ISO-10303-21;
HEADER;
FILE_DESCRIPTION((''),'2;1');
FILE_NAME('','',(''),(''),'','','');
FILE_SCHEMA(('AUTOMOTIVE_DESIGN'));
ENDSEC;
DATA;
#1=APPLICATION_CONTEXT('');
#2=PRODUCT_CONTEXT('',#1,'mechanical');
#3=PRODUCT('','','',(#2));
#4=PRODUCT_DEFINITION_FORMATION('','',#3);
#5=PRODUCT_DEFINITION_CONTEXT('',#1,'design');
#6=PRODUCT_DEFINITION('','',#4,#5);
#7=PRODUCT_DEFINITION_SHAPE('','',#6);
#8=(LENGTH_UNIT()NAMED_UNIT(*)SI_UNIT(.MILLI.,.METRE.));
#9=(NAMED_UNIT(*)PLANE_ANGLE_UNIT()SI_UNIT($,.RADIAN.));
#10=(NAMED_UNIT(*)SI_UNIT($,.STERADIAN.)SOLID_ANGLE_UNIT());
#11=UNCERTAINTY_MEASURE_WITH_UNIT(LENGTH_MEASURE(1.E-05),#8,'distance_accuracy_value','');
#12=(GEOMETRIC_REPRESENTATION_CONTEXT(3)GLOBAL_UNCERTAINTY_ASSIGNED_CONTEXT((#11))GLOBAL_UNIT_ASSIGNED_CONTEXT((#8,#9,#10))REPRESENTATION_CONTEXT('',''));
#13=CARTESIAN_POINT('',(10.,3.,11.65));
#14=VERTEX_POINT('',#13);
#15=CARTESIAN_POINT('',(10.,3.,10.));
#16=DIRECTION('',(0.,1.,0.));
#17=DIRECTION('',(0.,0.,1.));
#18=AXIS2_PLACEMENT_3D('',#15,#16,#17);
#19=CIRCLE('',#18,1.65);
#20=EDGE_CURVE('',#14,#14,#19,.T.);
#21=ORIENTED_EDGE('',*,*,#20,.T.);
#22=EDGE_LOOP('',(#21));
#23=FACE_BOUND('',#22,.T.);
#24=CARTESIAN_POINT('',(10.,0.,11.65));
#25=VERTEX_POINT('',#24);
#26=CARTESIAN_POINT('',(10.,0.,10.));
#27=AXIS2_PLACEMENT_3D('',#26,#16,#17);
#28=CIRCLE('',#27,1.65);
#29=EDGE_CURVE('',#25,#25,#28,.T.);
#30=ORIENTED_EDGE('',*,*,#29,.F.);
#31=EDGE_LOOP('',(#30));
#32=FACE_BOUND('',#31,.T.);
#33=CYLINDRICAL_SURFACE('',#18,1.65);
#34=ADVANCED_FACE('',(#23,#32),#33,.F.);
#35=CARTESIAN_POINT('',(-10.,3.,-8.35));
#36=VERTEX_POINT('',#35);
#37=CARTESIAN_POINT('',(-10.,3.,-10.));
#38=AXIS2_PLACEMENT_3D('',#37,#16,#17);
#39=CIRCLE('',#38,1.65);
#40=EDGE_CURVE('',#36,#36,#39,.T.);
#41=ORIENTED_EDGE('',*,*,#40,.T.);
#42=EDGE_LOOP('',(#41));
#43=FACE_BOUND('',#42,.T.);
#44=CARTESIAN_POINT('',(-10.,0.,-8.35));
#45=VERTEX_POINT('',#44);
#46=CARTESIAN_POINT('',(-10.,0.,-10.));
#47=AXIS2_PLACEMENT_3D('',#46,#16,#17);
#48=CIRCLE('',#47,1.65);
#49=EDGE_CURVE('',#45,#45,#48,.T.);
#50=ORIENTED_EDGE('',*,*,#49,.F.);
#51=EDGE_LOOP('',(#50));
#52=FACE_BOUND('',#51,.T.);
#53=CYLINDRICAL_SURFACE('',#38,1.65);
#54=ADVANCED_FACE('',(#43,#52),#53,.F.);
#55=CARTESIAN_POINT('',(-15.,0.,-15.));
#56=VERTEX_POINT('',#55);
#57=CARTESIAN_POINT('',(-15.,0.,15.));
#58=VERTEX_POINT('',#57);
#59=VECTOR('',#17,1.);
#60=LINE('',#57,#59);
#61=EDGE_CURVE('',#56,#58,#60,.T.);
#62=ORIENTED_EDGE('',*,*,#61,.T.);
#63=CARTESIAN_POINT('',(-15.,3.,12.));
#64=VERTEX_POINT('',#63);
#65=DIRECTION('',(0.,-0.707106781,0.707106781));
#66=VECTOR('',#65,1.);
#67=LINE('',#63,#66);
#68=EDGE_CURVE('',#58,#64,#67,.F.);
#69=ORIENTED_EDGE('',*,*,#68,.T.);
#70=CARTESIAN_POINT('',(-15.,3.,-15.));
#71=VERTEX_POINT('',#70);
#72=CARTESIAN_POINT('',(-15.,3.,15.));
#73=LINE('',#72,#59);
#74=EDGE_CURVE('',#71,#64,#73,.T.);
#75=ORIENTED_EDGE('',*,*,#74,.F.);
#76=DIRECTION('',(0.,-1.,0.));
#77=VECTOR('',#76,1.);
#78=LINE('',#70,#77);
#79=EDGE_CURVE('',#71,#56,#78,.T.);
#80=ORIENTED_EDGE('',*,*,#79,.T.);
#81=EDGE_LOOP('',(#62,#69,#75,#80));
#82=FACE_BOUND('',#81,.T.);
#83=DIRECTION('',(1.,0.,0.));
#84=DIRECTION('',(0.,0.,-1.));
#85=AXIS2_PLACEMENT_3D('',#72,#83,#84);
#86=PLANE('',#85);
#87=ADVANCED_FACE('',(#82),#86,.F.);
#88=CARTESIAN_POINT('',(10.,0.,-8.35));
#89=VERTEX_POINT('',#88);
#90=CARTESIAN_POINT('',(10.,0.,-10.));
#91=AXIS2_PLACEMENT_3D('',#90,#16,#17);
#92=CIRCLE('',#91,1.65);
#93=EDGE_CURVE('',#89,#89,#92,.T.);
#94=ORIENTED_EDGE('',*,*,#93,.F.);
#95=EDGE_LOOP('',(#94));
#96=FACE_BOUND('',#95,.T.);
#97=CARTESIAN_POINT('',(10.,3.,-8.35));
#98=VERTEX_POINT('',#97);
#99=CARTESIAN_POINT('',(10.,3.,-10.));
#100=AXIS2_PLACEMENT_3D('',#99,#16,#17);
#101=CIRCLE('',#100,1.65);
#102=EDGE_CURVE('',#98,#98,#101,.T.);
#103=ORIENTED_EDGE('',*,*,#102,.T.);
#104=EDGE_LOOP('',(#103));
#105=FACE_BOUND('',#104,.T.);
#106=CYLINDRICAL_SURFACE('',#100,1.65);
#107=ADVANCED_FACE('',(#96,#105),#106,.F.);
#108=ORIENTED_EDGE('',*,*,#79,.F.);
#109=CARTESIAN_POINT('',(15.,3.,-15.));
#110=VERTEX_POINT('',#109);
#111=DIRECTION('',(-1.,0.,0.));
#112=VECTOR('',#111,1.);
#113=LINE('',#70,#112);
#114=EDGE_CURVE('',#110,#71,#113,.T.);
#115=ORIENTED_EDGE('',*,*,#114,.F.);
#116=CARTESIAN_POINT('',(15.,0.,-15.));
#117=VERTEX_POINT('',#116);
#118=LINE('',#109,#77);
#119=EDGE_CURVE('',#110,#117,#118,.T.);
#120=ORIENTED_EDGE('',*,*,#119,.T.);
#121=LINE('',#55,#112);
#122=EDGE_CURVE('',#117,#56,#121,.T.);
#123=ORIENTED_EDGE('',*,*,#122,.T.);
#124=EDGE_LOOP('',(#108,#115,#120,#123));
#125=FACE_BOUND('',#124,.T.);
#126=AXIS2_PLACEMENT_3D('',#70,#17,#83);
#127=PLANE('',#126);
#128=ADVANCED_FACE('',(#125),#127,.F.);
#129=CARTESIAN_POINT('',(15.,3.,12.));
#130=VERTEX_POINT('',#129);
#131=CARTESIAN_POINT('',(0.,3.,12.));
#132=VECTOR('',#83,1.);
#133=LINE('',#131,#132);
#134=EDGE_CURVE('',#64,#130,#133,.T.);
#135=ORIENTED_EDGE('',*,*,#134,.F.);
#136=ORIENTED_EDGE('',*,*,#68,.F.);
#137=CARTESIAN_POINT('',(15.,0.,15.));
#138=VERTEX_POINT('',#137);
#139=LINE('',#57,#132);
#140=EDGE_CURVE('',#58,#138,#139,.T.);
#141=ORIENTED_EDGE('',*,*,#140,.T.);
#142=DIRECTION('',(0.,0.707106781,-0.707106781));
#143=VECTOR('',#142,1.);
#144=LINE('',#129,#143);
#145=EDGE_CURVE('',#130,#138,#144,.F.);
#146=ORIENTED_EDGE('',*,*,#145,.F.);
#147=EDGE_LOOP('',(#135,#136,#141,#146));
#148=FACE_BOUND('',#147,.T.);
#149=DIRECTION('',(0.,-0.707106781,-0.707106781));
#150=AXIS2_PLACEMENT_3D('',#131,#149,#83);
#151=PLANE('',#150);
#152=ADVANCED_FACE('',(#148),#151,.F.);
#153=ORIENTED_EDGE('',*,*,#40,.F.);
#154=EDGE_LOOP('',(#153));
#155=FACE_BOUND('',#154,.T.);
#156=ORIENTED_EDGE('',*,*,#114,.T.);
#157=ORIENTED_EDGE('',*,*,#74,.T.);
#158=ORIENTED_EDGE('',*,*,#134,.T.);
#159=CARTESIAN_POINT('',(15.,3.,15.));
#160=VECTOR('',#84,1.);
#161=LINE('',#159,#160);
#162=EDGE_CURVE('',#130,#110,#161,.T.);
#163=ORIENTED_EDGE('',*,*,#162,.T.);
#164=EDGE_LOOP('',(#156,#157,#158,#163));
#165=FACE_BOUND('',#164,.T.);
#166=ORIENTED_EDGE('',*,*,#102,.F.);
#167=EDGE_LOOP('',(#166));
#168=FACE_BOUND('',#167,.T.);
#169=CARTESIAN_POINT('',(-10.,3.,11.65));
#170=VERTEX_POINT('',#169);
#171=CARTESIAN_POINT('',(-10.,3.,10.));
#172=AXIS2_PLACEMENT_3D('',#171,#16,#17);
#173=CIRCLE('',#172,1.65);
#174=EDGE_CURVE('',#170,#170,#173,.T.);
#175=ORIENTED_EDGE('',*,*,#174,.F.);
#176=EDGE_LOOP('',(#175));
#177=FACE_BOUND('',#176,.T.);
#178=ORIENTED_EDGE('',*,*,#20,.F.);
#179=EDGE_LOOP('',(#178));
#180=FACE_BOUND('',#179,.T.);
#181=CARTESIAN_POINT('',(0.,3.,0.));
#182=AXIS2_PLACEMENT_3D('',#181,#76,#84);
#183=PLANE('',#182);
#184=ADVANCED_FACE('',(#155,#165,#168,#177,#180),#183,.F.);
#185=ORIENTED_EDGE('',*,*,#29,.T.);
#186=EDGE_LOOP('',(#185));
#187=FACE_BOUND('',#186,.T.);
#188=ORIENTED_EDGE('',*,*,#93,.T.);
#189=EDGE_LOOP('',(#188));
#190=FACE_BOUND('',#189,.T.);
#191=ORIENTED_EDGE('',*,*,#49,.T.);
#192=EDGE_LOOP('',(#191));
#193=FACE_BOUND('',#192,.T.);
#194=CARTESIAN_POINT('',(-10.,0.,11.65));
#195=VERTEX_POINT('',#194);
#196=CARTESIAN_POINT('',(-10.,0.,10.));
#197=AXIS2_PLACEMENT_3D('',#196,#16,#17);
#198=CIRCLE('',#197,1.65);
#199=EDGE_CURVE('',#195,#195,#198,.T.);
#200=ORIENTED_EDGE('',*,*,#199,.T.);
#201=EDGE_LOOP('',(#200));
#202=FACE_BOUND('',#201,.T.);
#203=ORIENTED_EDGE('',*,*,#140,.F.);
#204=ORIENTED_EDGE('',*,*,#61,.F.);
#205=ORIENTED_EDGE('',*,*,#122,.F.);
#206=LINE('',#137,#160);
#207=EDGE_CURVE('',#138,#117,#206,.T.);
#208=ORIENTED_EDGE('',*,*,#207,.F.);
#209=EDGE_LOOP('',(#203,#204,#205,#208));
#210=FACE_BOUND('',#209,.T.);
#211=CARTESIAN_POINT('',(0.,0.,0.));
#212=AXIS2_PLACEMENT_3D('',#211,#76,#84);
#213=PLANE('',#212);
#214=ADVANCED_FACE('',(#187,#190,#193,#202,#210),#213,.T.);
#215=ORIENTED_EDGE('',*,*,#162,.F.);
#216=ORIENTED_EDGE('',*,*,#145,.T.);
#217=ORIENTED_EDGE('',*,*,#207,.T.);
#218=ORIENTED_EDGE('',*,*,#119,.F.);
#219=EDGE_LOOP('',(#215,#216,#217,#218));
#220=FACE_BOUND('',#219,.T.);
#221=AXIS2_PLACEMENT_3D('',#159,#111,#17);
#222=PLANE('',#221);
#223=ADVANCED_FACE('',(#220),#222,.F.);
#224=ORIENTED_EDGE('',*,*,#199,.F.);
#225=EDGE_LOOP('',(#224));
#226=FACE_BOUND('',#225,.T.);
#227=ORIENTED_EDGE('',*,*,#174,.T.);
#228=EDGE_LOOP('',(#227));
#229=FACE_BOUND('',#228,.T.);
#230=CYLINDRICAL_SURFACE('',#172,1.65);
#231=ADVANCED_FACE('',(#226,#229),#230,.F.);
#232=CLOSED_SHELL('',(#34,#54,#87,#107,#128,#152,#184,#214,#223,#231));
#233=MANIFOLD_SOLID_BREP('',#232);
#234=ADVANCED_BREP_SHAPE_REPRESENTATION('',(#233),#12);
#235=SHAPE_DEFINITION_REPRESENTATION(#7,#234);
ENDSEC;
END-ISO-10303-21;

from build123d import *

# Parameters (mm, degrees)
SKETCH1_W             = 30
SKETCH1_H             = 30
BOSS_EXTRUDE1_DEPTH   = 3
M4X0_7_TAPPED_HOLE1_D = 3.3
CHAMFER2_SIZE         = 3


with BuildPart() as part:
    # Sketch1 → Boss-Extrude1 (new body)
    with BuildSketch(Plane(origin=(0, 0, 0), x_dir=(1, 0, 0), z_dir=(0, 1, 0))):
        Rectangle(SKETCH1_W, SKETCH1_H)
    extrude(amount=BOSS_EXTRUDE1_DEPTH)

    # M4x0.7 Tapped Hole1 (through all)
    with Locations(Plane(origin=(0, 3, 0), x_dir=(1, 0, 0), z_dir=(0, 1, 0))):
        with Locations((-10, -10), (-10, 10), (10, 10), (10, -10)):
            Hole(M4X0_7_TAPPED_HOLE1_D / 2)

    # Chamfer2
    chamfer2_edges = [part.edges().sort_by_distance(p)[0] for p in [
        (0, 3, 15),
    ]]
    chamfer(chamfer2_edges, length=CHAMFER2_SIZE - 0.0001)  # a hair under: the kernel refuses the full size


solid = part.part
